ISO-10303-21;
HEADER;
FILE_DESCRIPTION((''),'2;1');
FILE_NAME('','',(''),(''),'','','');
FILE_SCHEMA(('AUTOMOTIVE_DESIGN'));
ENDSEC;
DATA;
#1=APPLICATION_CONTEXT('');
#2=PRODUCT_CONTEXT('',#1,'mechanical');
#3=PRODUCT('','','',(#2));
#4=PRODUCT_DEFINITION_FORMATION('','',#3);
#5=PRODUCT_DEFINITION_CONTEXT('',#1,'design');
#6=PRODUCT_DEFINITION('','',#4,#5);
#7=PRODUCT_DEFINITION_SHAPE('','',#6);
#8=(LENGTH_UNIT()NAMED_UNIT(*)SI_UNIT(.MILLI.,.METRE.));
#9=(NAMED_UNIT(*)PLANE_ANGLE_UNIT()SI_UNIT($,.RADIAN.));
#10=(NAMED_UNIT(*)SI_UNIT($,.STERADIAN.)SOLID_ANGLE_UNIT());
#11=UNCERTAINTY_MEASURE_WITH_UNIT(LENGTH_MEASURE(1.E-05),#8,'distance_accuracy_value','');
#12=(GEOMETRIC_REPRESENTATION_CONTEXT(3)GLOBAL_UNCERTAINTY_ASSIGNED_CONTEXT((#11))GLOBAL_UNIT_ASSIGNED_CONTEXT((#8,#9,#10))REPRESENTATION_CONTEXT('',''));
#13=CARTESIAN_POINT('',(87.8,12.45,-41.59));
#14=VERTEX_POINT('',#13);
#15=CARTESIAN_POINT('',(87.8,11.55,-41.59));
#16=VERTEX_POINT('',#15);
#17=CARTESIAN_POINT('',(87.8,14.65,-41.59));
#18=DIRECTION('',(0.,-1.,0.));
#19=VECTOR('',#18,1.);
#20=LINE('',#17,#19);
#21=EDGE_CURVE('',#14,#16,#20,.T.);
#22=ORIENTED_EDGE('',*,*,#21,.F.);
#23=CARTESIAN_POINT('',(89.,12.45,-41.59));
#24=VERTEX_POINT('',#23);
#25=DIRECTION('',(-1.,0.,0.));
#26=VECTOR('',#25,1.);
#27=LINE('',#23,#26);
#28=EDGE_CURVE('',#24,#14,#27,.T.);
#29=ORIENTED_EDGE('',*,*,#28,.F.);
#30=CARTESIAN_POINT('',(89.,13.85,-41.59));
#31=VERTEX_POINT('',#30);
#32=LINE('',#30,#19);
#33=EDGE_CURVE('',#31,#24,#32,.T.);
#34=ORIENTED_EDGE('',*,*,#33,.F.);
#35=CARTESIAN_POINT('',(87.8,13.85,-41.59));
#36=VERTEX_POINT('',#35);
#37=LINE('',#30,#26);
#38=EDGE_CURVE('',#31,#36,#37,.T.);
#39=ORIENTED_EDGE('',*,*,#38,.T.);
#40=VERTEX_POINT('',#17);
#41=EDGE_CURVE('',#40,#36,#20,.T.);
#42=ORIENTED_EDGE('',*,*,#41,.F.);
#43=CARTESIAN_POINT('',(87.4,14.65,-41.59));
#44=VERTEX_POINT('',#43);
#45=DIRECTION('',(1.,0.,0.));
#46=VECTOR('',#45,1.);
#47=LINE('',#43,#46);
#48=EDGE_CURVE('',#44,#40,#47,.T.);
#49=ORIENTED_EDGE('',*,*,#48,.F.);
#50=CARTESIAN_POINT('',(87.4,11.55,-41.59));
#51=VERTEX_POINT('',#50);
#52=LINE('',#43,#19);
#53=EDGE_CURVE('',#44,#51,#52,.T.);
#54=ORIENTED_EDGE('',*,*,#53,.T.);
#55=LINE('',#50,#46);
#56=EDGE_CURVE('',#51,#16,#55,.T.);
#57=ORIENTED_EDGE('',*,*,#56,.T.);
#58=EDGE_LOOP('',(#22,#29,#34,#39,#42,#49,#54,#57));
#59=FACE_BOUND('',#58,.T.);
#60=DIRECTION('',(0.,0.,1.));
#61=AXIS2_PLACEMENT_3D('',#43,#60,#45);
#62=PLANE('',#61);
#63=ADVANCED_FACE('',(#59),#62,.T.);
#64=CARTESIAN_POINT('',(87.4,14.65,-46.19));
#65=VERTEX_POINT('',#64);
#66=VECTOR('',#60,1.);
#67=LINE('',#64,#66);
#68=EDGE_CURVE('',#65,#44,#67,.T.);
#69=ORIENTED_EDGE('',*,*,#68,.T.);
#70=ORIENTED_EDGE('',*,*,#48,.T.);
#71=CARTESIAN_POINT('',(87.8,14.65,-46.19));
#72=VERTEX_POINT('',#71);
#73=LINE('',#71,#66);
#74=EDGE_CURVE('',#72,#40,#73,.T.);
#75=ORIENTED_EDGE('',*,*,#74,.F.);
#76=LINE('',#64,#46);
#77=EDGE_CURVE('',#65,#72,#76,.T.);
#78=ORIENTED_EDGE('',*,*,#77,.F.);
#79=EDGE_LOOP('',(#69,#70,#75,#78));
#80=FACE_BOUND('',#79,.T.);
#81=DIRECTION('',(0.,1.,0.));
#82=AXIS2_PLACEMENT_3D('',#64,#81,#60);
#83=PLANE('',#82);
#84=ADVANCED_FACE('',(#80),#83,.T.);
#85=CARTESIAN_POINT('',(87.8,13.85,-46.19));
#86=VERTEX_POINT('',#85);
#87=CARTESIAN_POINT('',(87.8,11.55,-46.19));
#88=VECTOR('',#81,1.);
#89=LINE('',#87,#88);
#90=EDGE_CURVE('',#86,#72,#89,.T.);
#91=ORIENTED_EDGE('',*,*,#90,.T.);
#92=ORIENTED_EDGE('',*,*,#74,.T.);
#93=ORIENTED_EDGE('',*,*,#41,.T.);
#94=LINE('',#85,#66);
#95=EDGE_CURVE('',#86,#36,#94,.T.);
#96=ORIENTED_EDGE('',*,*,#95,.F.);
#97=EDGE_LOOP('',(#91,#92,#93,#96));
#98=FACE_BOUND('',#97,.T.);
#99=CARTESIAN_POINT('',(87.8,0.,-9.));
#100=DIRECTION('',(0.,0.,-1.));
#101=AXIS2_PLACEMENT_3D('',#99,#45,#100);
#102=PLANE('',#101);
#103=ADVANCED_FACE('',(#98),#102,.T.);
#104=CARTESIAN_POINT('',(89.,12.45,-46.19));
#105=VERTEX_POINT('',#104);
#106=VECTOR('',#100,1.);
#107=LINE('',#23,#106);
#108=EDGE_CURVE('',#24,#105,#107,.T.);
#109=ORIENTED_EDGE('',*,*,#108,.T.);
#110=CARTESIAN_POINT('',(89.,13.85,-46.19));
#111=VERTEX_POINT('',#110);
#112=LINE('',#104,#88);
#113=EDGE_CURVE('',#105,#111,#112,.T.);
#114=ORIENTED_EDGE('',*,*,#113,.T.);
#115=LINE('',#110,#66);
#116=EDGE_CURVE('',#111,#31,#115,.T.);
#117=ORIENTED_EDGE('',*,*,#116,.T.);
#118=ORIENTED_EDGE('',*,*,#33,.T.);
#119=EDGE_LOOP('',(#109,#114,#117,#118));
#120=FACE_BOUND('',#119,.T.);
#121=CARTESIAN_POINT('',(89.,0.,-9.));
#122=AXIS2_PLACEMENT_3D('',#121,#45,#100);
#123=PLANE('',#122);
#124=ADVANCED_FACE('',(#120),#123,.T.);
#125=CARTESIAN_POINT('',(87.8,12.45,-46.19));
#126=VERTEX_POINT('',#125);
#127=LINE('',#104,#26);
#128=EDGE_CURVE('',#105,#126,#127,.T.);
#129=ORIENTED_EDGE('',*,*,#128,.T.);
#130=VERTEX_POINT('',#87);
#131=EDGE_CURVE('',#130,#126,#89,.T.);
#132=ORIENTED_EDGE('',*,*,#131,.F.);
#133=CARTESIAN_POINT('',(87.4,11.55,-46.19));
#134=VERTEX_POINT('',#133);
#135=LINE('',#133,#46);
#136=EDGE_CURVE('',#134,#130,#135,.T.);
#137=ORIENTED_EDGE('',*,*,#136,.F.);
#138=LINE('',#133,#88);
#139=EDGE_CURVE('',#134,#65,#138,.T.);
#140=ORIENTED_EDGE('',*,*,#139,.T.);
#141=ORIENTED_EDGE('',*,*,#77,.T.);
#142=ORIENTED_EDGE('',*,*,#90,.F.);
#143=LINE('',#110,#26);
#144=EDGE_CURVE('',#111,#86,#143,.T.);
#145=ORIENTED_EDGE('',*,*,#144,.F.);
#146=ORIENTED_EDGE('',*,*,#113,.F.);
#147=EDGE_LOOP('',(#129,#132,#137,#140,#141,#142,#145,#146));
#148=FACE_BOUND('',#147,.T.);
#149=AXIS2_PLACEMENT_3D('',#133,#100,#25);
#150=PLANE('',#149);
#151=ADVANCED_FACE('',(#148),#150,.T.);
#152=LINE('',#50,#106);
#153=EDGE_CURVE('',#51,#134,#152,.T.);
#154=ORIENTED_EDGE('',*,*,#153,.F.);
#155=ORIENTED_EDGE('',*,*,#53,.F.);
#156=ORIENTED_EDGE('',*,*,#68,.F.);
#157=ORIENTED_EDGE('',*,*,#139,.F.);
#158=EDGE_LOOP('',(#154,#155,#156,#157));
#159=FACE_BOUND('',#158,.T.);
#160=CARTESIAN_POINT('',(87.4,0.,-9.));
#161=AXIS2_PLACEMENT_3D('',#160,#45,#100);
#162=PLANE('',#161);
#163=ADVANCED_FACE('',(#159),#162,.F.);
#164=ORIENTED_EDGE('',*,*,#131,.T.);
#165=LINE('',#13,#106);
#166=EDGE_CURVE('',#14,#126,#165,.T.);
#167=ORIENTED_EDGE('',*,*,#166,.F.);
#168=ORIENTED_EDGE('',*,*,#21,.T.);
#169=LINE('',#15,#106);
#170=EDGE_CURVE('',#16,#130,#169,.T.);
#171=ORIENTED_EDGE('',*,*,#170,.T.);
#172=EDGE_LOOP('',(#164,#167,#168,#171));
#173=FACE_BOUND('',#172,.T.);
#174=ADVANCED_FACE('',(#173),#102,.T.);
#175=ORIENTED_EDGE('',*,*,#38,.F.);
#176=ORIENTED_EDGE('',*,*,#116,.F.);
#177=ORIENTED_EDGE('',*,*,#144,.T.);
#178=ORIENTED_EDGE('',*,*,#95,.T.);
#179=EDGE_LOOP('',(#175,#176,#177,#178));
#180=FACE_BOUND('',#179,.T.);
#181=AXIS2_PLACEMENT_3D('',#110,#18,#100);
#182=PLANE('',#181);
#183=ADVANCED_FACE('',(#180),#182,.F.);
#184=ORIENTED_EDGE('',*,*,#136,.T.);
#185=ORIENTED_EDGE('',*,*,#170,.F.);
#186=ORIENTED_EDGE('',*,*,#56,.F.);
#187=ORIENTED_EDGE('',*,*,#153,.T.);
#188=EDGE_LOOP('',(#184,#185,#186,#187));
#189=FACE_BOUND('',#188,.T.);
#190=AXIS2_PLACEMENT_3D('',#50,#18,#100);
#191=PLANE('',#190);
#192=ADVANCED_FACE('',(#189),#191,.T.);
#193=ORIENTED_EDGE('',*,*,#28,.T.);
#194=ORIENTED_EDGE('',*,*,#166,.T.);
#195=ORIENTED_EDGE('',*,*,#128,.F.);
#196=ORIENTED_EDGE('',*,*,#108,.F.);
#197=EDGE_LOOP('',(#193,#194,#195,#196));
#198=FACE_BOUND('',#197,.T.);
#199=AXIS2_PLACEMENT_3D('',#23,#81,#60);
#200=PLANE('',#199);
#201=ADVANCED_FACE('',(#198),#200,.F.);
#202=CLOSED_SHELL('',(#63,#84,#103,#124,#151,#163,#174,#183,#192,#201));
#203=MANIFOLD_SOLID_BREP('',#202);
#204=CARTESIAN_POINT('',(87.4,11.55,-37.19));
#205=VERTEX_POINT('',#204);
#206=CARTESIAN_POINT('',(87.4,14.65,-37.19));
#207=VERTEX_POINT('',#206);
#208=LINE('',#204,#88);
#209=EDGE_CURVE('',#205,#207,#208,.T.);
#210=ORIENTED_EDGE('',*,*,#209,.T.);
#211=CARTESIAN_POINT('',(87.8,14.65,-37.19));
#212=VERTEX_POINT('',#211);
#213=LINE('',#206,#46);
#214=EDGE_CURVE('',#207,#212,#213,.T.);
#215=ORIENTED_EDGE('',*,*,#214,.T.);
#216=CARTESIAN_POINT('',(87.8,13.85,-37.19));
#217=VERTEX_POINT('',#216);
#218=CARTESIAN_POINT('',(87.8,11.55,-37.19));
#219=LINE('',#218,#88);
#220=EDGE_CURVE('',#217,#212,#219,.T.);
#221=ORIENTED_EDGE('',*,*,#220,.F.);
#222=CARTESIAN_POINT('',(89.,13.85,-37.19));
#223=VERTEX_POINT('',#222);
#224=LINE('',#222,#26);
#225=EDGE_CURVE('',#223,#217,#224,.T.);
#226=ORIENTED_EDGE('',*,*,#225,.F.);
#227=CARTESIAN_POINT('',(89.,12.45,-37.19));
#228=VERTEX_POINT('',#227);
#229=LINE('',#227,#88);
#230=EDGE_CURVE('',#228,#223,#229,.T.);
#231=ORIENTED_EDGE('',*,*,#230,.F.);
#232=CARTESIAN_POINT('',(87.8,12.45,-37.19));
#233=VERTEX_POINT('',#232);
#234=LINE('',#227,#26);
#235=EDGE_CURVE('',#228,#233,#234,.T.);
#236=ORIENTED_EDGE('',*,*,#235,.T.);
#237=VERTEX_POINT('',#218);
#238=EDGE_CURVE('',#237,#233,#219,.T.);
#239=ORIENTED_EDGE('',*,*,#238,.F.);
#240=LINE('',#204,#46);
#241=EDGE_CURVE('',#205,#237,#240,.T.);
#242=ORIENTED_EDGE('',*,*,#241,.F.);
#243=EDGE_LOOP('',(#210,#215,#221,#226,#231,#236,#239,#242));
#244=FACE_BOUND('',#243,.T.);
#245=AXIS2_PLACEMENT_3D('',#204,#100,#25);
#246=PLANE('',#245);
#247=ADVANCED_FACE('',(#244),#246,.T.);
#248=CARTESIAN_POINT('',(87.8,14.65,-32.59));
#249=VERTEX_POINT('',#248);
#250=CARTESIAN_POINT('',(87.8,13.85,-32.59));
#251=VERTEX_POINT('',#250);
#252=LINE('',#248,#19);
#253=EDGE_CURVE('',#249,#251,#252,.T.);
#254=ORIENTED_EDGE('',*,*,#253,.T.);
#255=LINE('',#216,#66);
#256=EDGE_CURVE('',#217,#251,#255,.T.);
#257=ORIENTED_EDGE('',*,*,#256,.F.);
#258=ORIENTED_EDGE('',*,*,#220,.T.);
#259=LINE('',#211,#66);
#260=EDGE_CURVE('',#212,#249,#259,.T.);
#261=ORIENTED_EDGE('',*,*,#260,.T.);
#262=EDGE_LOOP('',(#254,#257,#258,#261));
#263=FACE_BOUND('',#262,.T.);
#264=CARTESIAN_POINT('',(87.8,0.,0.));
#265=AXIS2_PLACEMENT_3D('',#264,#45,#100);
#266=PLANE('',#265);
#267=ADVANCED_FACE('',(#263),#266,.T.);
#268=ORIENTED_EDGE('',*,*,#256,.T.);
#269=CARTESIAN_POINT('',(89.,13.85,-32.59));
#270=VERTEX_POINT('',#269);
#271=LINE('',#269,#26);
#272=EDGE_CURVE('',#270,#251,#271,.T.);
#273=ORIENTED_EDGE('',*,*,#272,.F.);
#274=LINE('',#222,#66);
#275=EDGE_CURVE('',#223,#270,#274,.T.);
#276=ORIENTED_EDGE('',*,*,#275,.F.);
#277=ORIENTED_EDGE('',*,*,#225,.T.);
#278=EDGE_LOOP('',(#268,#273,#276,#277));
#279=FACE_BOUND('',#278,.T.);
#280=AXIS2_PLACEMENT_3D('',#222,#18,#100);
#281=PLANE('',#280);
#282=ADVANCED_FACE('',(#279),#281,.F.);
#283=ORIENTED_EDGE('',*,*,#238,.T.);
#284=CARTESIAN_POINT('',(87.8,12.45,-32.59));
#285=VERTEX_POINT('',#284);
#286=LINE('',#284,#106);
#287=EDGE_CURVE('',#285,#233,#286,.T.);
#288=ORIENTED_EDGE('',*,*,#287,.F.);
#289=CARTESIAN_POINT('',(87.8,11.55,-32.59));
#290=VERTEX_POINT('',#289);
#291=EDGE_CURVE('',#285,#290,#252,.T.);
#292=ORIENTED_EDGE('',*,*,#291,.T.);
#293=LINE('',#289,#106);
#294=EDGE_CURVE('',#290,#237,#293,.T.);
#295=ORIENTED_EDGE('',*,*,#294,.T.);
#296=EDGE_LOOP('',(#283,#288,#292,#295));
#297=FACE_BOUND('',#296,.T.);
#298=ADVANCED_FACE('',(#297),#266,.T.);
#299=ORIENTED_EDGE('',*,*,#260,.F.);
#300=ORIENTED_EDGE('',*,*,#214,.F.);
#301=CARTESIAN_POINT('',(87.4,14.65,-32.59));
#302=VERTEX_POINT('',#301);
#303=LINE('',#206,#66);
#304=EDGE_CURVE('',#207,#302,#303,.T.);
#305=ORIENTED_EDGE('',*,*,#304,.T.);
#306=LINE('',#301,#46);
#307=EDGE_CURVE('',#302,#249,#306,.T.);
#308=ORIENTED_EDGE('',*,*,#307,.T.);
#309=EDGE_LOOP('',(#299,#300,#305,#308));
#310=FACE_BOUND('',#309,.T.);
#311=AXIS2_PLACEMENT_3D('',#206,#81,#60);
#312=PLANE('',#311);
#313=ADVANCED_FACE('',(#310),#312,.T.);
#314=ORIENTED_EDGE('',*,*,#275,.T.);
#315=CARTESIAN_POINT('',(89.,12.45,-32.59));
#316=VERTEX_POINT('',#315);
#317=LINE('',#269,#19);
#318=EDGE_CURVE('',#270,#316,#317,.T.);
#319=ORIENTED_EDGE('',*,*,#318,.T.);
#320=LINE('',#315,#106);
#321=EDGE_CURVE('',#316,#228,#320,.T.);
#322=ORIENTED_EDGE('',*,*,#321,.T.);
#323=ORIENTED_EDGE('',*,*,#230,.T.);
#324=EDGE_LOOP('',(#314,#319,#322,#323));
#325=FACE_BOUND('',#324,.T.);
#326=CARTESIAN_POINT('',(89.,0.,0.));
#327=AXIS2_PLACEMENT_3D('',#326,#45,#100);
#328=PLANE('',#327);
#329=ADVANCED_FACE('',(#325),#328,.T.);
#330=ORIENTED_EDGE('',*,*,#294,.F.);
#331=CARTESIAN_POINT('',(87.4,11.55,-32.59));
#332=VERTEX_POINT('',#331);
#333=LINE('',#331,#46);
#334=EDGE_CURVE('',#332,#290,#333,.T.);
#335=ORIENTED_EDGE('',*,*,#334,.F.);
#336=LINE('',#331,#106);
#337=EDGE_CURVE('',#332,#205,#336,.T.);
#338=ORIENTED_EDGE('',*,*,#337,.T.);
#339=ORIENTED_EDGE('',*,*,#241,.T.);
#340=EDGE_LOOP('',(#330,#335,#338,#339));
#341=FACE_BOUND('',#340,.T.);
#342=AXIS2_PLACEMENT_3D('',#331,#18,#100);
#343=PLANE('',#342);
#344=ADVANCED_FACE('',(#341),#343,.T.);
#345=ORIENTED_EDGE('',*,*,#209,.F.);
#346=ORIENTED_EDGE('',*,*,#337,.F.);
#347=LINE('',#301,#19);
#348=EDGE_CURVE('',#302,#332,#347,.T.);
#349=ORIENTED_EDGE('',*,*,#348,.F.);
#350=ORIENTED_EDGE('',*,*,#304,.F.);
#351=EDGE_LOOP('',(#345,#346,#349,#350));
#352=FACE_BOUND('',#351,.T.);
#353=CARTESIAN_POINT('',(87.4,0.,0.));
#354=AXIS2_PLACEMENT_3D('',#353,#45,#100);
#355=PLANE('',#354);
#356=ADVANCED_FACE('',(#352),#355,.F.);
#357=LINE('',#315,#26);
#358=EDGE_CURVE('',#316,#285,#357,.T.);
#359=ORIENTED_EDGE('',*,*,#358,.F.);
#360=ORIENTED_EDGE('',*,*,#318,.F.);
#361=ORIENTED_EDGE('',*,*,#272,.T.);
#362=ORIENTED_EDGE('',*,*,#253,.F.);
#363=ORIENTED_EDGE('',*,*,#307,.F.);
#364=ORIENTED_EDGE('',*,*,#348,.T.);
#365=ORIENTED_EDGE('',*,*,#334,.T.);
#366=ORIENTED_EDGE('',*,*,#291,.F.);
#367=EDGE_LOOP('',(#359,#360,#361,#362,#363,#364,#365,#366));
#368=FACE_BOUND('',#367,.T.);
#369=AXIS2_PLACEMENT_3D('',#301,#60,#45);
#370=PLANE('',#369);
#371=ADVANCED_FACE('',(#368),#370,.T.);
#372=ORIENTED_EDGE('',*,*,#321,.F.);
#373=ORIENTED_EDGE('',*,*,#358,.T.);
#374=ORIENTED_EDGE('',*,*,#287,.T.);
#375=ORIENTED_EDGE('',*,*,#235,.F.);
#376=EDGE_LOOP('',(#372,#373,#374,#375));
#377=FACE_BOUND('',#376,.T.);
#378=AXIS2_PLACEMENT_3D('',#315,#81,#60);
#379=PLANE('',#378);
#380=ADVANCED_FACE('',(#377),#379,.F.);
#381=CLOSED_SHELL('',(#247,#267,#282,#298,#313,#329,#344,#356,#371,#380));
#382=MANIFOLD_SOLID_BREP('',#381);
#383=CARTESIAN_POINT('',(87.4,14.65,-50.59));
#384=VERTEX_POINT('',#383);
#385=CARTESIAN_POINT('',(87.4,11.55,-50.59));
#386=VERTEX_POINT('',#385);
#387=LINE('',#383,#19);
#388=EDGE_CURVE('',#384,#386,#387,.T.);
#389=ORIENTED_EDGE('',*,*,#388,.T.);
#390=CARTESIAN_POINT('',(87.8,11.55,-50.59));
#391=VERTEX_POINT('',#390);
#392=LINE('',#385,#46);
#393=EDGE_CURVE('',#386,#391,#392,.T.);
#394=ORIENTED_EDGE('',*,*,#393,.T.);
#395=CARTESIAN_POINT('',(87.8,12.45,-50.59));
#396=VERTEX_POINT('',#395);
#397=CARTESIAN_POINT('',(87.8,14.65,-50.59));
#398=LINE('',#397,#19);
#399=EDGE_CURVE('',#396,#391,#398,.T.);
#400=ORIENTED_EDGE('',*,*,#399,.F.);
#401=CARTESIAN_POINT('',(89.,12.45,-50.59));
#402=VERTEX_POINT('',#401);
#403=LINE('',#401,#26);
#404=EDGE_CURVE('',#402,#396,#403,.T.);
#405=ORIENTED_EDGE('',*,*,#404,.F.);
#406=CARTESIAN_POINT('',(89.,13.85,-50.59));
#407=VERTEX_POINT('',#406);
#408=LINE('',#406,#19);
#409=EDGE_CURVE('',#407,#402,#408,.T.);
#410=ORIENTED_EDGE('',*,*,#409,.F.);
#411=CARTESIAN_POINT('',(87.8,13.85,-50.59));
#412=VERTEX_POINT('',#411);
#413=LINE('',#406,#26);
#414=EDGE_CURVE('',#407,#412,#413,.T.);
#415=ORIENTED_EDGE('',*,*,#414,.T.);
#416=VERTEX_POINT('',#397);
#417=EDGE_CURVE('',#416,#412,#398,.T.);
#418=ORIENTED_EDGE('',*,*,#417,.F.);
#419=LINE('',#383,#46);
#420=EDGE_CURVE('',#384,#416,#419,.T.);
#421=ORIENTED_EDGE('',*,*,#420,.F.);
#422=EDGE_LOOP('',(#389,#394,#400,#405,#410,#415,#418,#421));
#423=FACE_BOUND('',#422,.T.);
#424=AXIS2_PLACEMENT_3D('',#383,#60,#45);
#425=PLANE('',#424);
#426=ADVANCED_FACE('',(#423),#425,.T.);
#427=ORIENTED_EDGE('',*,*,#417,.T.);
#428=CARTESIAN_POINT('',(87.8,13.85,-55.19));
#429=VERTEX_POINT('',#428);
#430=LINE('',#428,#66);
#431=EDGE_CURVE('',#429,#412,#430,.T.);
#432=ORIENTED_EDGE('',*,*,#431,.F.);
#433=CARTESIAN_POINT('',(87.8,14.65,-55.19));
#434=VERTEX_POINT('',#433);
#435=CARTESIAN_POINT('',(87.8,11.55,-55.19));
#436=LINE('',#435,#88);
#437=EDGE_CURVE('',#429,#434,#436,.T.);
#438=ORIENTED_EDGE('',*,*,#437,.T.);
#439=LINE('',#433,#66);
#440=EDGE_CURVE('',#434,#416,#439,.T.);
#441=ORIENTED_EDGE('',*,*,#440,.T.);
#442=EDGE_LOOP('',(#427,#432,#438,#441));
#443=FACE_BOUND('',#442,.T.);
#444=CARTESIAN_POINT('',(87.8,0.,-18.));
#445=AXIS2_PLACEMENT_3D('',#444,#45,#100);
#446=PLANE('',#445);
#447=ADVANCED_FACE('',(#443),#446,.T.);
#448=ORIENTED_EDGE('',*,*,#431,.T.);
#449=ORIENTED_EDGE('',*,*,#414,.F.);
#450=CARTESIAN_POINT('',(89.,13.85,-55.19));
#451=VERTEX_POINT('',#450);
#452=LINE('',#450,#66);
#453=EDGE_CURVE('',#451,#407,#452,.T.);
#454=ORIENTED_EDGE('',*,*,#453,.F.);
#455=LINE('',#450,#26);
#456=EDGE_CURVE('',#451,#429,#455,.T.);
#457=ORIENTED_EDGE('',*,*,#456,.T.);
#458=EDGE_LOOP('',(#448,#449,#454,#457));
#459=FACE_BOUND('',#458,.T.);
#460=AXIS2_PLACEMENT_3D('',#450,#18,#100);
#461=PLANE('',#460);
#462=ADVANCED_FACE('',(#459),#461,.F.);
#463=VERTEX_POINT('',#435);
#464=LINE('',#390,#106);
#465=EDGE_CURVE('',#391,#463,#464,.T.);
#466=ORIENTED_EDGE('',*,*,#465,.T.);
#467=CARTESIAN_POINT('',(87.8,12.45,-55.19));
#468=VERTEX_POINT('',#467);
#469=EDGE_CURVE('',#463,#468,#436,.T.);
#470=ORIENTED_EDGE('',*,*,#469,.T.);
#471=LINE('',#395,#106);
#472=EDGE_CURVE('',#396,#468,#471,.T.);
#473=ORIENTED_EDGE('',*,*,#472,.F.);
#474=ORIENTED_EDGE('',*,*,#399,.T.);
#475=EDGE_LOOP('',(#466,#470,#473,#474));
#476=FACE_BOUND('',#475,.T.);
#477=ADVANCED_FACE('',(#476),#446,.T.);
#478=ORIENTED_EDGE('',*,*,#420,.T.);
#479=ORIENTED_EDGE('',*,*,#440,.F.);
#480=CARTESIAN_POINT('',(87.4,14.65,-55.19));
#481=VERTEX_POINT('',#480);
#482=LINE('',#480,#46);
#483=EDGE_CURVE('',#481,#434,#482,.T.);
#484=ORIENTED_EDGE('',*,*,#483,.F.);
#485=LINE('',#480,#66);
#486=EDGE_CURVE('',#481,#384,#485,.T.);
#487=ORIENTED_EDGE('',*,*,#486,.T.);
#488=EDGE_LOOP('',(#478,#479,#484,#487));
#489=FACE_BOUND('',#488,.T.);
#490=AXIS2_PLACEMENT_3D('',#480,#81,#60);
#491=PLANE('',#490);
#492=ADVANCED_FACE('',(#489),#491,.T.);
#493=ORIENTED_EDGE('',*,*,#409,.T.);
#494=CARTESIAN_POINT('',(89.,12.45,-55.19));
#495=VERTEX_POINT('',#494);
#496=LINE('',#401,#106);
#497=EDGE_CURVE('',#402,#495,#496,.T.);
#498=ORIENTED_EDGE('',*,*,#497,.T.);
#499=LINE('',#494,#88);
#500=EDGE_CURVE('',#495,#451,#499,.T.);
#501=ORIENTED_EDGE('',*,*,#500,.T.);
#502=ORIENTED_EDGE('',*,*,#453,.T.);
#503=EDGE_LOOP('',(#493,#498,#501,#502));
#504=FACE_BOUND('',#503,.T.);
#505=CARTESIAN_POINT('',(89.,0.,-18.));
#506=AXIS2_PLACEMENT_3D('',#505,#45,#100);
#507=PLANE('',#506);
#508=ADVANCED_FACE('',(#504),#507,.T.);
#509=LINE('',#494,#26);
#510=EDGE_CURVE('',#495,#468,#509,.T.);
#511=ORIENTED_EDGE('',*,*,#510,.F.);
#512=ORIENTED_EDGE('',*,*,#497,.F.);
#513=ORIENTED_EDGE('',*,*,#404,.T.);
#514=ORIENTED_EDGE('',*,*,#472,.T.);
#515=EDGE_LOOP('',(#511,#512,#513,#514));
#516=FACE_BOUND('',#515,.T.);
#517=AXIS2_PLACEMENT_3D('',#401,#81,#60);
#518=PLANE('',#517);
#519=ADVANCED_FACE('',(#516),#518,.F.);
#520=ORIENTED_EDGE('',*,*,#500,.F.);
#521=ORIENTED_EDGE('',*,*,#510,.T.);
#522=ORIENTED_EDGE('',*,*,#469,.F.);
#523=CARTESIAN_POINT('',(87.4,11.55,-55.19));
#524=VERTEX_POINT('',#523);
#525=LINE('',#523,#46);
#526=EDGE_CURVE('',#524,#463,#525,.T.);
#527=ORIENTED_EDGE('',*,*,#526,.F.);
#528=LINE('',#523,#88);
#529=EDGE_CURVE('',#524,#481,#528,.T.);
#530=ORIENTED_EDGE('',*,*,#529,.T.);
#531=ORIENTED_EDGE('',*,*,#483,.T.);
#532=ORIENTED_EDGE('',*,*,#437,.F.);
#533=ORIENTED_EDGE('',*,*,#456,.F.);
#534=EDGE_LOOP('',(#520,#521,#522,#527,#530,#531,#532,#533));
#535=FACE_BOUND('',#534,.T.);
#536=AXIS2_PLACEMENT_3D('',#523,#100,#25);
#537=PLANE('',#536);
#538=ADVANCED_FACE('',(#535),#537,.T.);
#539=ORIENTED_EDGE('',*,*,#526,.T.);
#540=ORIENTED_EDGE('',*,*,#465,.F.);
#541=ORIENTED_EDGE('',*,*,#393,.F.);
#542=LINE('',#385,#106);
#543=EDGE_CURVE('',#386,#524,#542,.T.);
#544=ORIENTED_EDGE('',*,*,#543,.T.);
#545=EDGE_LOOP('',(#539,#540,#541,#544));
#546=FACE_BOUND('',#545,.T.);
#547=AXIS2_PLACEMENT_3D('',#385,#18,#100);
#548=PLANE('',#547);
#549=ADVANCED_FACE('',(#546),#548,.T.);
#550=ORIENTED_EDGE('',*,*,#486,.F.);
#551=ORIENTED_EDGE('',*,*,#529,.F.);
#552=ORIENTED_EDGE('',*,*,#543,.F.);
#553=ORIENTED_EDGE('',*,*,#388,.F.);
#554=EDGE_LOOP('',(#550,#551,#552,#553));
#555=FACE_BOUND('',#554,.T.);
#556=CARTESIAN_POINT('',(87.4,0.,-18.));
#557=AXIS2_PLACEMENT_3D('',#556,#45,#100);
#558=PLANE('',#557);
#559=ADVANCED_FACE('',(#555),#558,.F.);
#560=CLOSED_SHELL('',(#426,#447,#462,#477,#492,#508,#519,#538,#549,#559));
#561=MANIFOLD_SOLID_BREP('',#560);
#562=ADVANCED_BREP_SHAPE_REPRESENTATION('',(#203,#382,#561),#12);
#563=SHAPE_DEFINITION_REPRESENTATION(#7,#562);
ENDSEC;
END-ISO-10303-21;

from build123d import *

# Parameters (mm, degrees)
AUFSATZ_LINEAR_START                = -0.4
AUFSATZ_LINEAR_AUSTRAGEN1_OUTLINE_W = 4.6
AUFSATZ_LINEAR_AUSTRAGEN1_OUTLINE_H = 3.1
AUFSATZ_LINEAR_AUSTRAGEN1_DEPTH     = 0.4
SKIZZE3_W                           = 4.6
SKIZZE3_H                           = 1.4
AUFSATZ_LINEAR_AUSTRAGEN2_DEPTH     = 1.2
LINEARES_MUSTER1_COUNT              = 3
LINEARES_MUSTER1_PITCH              = 9


# Read off the part's stored shape, not the designer's step: Aufsatz-Linear austragen1
with BuildPart() as part:
    # Aufsatz-Linear austragen1 outline → Aufsatz-Linear austragen1 (new body)
    with BuildSketch(Plane(origin=(87.8, 0, 0), x_dir=(0, 0, -1), z_dir=(1, 0, 0)).offset(AUFSATZ_LINEAR_START)):
        with Locations((34.89, 13.1)):
            Rectangle(AUFSATZ_LINEAR_AUSTRAGEN1_OUTLINE_W, AUFSATZ_LINEAR_AUSTRAGEN1_OUTLINE_H)
    extrude(amount=AUFSATZ_LINEAR_AUSTRAGEN1_DEPTH)

    # Skizze3 → Aufsatz-Linear austragen2 (add)
    with BuildSketch(Plane(origin=(87.8, 0, 0), x_dir=(0, 0, -1), z_dir=(1, 0, 0))):
        with Locations((34.89, 13.15)):
            Rectangle(SKIZZE3_W, SKIZZE3_H)
    extrude(amount=AUFSATZ_LINEAR_AUSTRAGEN2_DEPTH)


with BuildPart() as lineares_muster1_1:
    # Lineares Muster1: pattern copy
    add(part.part.moved(Location(Vector(0, 0, -1) * (1 * LINEARES_MUSTER1_PITCH))))


with BuildPart() as lineares_muster1_2:
    # Lineares Muster1: pattern copy
    add(part.part.moved(Location(Vector(0, 0, -1) * (2 * LINEARES_MUSTER1_PITCH))))


solid = Compound([part.part, lineares_muster1_1.part, lineares_muster1_2.part])
